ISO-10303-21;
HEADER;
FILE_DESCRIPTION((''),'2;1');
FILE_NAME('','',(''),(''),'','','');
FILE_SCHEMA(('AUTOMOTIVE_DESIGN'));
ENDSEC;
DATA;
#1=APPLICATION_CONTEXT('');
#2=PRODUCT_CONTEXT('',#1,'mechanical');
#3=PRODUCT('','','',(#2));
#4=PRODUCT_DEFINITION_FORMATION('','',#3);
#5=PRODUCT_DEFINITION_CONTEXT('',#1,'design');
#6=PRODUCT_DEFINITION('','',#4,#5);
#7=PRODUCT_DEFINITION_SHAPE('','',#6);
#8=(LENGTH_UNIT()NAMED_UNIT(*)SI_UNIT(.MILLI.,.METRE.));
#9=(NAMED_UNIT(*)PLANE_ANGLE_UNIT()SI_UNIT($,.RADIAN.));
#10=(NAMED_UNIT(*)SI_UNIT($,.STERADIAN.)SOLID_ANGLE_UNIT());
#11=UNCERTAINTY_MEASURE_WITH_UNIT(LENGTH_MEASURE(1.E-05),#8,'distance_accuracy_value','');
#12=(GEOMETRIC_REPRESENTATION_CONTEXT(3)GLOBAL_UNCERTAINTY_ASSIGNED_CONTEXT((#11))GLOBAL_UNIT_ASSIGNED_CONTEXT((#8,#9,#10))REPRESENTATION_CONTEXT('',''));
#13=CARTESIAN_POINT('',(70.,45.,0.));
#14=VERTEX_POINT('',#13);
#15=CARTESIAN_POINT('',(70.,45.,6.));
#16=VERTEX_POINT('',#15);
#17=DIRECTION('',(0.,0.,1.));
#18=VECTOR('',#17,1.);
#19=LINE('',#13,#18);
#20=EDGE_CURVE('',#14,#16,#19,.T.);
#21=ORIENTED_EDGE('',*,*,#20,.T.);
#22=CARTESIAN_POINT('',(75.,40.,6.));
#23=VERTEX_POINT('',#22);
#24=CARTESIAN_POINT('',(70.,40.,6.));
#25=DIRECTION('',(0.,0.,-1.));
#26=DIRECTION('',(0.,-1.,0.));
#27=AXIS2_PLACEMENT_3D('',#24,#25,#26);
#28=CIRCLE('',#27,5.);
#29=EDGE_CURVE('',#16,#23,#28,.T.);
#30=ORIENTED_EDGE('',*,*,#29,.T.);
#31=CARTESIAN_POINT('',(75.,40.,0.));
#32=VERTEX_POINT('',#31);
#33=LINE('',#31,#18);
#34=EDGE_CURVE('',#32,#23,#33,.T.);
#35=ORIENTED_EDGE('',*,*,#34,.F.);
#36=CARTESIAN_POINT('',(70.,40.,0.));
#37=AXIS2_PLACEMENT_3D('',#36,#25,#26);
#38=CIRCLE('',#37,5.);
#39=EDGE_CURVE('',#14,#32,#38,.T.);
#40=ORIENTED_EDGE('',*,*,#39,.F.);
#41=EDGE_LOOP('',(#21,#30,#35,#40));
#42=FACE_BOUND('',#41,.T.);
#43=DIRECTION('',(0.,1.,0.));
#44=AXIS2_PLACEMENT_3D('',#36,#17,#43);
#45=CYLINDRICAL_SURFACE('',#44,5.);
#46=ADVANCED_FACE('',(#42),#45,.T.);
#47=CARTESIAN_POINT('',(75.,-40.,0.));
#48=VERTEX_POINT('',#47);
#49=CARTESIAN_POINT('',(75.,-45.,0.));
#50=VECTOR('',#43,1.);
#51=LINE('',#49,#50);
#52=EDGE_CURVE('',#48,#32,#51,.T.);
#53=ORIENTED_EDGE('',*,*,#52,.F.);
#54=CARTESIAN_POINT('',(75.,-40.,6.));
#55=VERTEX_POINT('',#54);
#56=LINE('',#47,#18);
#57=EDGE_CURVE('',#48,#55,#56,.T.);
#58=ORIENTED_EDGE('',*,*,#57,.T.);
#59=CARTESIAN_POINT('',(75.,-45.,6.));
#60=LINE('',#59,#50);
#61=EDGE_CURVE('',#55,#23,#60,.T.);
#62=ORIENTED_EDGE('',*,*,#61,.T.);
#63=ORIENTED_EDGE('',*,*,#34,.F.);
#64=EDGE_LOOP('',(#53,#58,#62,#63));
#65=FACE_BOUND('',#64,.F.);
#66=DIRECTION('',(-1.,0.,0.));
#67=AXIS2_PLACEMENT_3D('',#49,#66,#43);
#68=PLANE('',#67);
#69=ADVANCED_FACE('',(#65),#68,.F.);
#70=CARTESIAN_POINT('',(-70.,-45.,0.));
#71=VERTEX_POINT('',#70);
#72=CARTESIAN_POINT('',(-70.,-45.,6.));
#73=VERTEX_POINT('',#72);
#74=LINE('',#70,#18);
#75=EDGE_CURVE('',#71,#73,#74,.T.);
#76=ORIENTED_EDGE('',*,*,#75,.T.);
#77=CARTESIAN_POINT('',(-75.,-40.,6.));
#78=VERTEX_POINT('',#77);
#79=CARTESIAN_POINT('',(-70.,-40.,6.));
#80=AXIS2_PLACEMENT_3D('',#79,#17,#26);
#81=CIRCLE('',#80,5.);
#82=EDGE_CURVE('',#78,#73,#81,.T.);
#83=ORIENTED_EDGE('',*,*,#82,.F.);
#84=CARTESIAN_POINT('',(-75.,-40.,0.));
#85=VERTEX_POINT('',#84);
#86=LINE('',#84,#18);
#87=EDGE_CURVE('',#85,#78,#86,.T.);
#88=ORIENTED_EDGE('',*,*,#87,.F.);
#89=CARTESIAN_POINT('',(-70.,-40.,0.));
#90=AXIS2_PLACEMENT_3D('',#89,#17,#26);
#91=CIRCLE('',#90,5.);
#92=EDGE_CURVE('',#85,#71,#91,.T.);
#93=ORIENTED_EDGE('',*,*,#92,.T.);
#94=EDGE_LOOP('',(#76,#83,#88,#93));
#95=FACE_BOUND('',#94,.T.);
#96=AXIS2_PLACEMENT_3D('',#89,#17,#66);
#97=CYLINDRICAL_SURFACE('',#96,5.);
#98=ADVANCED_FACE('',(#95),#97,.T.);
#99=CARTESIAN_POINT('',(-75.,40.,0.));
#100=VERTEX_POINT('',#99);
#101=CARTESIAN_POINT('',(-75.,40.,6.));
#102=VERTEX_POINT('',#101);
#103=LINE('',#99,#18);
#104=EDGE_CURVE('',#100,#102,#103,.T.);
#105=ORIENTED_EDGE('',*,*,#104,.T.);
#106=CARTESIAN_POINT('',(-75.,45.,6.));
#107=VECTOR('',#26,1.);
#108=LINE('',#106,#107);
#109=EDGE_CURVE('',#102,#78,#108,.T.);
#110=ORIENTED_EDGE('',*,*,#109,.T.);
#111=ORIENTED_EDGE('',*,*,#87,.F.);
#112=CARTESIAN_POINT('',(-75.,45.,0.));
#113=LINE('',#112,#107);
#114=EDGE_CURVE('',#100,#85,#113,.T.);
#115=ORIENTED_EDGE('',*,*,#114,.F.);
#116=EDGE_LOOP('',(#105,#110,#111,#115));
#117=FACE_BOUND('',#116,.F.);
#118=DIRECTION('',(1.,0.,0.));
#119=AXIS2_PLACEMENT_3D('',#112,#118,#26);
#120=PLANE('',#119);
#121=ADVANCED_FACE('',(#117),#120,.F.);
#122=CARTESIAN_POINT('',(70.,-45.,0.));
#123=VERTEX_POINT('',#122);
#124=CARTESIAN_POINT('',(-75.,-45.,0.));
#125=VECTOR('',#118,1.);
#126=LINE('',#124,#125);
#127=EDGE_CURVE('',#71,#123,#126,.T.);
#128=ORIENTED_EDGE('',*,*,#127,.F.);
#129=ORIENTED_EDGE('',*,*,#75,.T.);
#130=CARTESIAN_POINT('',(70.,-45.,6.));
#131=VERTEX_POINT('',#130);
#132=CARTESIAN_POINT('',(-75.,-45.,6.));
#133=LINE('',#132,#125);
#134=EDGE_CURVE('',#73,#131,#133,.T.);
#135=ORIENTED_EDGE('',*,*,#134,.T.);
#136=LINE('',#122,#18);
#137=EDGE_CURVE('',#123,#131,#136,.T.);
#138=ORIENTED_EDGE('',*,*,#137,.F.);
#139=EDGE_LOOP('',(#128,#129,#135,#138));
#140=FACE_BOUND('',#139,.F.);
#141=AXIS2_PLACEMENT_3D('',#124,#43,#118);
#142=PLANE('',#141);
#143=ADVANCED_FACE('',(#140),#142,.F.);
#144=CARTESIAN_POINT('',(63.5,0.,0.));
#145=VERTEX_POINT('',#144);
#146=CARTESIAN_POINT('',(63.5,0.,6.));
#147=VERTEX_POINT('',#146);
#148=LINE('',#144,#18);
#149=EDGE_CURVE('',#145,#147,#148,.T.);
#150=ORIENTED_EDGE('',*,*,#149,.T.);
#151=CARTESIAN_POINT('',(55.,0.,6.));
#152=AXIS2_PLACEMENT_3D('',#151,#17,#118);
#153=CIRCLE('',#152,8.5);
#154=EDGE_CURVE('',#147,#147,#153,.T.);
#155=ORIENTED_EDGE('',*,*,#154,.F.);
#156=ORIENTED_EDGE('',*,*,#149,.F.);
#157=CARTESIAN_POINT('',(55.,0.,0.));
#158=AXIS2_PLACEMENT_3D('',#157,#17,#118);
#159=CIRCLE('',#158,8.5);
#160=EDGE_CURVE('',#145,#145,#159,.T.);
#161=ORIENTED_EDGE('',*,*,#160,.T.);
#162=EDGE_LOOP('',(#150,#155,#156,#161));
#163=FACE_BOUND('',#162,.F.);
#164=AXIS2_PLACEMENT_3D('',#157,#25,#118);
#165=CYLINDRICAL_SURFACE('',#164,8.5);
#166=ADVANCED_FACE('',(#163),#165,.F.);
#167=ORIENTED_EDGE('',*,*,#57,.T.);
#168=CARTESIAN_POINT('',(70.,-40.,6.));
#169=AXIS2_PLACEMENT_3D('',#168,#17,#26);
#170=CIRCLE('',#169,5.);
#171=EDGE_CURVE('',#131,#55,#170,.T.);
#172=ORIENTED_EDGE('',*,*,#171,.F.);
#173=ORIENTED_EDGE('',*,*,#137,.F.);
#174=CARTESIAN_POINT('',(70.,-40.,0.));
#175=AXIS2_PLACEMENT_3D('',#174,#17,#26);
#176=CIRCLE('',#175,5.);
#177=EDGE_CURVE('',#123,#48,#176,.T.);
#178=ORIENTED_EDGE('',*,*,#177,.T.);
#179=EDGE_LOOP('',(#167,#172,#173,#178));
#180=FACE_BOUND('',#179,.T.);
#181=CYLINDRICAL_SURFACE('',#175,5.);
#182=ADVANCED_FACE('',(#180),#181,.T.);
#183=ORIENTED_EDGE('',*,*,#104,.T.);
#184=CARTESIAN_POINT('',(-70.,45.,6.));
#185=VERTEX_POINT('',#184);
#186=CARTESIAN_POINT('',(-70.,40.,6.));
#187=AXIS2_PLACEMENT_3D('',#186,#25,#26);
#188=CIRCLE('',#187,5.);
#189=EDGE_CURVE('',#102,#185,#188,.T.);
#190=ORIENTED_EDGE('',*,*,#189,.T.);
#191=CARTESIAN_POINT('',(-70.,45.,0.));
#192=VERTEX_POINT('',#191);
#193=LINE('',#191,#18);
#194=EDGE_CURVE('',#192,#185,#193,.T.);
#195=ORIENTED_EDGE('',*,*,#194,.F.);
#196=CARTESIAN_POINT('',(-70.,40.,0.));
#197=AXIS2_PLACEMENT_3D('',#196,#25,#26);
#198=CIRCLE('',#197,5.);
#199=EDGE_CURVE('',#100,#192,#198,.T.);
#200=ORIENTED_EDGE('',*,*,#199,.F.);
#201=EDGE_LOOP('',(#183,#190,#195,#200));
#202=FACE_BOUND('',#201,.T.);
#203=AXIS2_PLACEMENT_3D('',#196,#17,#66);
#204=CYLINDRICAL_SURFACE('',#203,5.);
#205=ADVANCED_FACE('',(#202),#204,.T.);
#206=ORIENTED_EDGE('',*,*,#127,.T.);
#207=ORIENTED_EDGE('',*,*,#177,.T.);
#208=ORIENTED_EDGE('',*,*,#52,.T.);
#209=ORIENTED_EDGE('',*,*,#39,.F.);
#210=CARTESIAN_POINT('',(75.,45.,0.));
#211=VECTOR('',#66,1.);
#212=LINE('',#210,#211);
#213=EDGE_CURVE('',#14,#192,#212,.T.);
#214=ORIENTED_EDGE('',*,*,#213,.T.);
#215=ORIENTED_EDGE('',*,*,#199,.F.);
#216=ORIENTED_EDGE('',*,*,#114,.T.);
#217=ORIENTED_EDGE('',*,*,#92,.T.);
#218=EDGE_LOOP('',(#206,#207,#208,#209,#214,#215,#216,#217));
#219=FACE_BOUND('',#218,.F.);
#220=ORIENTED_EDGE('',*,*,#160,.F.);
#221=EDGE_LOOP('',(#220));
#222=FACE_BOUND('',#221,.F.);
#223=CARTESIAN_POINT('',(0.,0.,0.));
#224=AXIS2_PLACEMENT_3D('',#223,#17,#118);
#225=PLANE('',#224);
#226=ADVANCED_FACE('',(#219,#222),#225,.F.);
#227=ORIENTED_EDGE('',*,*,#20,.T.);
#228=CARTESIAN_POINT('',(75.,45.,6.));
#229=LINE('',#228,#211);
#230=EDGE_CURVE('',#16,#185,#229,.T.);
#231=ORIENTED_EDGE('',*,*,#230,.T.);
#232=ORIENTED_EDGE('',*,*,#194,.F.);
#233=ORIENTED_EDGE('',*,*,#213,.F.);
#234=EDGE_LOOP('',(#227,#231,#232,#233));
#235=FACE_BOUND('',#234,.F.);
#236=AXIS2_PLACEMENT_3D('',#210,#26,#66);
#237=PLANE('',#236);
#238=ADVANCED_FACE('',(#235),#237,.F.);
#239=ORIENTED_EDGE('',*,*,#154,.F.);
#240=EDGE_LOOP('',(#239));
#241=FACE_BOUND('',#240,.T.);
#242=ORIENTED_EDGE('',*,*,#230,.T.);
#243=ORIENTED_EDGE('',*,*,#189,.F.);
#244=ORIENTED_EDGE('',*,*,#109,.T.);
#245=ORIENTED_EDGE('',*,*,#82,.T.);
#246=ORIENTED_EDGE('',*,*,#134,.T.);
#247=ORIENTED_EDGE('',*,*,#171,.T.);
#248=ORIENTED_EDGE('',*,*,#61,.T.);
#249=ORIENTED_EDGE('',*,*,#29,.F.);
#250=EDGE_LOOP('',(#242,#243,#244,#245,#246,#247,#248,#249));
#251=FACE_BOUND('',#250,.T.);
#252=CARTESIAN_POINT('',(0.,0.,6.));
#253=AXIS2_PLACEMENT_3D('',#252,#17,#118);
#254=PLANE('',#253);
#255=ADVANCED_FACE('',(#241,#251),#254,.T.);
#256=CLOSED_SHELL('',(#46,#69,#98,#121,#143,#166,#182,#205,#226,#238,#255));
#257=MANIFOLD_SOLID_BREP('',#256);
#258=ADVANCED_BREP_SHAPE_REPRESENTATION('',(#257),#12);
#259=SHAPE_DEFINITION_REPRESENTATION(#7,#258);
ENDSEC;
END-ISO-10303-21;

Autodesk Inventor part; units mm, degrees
ref_plane "YZ Plane" through (0, 0, 0) normal (1, 0, 0) x (0, 1, 0)
ref_plane "XZ Plane" through (0, 0, 0) normal (0, 1, 0) x (-1, 0, 0)
ref_plane "XY Plane" through (0, 0, 0) normal (0, 0, 1) x (1, 0, 0)
sketch "Sketch1" plane through (0, 0, 0) normal (0, 0, 1) x (1, 0, 0)
  line L0 (-75, -45) -> (75, -45)
  line L1 (75, -45) -> (75, 45)
  line L2 (75, 45) -> (-75, 45)
  line L3 (-75, 45) -> (-75, -45)
  line L4 (-75, -45) -> (75, 45) construction
  line L5 (75, -45) -> (-75, 45) construction
  circle A0 centre (55, -25) radius 8.5
  circle A1 centre (55, 25) radius 8.5
  line L6 (0, 0) -> (75, 0) construction
  circle A2 centre (55, 0) radius 8.5
  dimension "d0" = 150
  dimension "d1" = 90
  dimension "d23" = 17
  dimension "d25" = 20
  dimension "d26" = 20
extrude "Plate1" add sketch "Sketch1" along normal blind 6 contours L3 L2 L1 L0 | A0 | A1
fillet "Corner Round2" radius 5 4 edges at (-75, 45, 3) (-75, -45, 3) (75, -45, 3) (75, 45, 3)
equation "\"d26\" = d25"
equation "\"d2\" = Thickness"
equation "\"BendReliefWidth\" = Thickness"
equation "\"BendReliefDepth\" = 0.5 * Thickness"
equation "\"CornerReliefSize\" = 4 * Thickness"
equation "\"MinimumRemnant\" = 2 * Thickness"
equation "\"TransitionRadius\" = BendRadius"
equation "\"JacobiRadiusSize\" = BendRadius"
equation "\"GapSize\" = Thickness"
equation "\"Thickness\" = 6"
equation "\"BendRadius\" = 5"
properties part number "PRS 1200-94 leg floor plate" material "Stainless Steel"
